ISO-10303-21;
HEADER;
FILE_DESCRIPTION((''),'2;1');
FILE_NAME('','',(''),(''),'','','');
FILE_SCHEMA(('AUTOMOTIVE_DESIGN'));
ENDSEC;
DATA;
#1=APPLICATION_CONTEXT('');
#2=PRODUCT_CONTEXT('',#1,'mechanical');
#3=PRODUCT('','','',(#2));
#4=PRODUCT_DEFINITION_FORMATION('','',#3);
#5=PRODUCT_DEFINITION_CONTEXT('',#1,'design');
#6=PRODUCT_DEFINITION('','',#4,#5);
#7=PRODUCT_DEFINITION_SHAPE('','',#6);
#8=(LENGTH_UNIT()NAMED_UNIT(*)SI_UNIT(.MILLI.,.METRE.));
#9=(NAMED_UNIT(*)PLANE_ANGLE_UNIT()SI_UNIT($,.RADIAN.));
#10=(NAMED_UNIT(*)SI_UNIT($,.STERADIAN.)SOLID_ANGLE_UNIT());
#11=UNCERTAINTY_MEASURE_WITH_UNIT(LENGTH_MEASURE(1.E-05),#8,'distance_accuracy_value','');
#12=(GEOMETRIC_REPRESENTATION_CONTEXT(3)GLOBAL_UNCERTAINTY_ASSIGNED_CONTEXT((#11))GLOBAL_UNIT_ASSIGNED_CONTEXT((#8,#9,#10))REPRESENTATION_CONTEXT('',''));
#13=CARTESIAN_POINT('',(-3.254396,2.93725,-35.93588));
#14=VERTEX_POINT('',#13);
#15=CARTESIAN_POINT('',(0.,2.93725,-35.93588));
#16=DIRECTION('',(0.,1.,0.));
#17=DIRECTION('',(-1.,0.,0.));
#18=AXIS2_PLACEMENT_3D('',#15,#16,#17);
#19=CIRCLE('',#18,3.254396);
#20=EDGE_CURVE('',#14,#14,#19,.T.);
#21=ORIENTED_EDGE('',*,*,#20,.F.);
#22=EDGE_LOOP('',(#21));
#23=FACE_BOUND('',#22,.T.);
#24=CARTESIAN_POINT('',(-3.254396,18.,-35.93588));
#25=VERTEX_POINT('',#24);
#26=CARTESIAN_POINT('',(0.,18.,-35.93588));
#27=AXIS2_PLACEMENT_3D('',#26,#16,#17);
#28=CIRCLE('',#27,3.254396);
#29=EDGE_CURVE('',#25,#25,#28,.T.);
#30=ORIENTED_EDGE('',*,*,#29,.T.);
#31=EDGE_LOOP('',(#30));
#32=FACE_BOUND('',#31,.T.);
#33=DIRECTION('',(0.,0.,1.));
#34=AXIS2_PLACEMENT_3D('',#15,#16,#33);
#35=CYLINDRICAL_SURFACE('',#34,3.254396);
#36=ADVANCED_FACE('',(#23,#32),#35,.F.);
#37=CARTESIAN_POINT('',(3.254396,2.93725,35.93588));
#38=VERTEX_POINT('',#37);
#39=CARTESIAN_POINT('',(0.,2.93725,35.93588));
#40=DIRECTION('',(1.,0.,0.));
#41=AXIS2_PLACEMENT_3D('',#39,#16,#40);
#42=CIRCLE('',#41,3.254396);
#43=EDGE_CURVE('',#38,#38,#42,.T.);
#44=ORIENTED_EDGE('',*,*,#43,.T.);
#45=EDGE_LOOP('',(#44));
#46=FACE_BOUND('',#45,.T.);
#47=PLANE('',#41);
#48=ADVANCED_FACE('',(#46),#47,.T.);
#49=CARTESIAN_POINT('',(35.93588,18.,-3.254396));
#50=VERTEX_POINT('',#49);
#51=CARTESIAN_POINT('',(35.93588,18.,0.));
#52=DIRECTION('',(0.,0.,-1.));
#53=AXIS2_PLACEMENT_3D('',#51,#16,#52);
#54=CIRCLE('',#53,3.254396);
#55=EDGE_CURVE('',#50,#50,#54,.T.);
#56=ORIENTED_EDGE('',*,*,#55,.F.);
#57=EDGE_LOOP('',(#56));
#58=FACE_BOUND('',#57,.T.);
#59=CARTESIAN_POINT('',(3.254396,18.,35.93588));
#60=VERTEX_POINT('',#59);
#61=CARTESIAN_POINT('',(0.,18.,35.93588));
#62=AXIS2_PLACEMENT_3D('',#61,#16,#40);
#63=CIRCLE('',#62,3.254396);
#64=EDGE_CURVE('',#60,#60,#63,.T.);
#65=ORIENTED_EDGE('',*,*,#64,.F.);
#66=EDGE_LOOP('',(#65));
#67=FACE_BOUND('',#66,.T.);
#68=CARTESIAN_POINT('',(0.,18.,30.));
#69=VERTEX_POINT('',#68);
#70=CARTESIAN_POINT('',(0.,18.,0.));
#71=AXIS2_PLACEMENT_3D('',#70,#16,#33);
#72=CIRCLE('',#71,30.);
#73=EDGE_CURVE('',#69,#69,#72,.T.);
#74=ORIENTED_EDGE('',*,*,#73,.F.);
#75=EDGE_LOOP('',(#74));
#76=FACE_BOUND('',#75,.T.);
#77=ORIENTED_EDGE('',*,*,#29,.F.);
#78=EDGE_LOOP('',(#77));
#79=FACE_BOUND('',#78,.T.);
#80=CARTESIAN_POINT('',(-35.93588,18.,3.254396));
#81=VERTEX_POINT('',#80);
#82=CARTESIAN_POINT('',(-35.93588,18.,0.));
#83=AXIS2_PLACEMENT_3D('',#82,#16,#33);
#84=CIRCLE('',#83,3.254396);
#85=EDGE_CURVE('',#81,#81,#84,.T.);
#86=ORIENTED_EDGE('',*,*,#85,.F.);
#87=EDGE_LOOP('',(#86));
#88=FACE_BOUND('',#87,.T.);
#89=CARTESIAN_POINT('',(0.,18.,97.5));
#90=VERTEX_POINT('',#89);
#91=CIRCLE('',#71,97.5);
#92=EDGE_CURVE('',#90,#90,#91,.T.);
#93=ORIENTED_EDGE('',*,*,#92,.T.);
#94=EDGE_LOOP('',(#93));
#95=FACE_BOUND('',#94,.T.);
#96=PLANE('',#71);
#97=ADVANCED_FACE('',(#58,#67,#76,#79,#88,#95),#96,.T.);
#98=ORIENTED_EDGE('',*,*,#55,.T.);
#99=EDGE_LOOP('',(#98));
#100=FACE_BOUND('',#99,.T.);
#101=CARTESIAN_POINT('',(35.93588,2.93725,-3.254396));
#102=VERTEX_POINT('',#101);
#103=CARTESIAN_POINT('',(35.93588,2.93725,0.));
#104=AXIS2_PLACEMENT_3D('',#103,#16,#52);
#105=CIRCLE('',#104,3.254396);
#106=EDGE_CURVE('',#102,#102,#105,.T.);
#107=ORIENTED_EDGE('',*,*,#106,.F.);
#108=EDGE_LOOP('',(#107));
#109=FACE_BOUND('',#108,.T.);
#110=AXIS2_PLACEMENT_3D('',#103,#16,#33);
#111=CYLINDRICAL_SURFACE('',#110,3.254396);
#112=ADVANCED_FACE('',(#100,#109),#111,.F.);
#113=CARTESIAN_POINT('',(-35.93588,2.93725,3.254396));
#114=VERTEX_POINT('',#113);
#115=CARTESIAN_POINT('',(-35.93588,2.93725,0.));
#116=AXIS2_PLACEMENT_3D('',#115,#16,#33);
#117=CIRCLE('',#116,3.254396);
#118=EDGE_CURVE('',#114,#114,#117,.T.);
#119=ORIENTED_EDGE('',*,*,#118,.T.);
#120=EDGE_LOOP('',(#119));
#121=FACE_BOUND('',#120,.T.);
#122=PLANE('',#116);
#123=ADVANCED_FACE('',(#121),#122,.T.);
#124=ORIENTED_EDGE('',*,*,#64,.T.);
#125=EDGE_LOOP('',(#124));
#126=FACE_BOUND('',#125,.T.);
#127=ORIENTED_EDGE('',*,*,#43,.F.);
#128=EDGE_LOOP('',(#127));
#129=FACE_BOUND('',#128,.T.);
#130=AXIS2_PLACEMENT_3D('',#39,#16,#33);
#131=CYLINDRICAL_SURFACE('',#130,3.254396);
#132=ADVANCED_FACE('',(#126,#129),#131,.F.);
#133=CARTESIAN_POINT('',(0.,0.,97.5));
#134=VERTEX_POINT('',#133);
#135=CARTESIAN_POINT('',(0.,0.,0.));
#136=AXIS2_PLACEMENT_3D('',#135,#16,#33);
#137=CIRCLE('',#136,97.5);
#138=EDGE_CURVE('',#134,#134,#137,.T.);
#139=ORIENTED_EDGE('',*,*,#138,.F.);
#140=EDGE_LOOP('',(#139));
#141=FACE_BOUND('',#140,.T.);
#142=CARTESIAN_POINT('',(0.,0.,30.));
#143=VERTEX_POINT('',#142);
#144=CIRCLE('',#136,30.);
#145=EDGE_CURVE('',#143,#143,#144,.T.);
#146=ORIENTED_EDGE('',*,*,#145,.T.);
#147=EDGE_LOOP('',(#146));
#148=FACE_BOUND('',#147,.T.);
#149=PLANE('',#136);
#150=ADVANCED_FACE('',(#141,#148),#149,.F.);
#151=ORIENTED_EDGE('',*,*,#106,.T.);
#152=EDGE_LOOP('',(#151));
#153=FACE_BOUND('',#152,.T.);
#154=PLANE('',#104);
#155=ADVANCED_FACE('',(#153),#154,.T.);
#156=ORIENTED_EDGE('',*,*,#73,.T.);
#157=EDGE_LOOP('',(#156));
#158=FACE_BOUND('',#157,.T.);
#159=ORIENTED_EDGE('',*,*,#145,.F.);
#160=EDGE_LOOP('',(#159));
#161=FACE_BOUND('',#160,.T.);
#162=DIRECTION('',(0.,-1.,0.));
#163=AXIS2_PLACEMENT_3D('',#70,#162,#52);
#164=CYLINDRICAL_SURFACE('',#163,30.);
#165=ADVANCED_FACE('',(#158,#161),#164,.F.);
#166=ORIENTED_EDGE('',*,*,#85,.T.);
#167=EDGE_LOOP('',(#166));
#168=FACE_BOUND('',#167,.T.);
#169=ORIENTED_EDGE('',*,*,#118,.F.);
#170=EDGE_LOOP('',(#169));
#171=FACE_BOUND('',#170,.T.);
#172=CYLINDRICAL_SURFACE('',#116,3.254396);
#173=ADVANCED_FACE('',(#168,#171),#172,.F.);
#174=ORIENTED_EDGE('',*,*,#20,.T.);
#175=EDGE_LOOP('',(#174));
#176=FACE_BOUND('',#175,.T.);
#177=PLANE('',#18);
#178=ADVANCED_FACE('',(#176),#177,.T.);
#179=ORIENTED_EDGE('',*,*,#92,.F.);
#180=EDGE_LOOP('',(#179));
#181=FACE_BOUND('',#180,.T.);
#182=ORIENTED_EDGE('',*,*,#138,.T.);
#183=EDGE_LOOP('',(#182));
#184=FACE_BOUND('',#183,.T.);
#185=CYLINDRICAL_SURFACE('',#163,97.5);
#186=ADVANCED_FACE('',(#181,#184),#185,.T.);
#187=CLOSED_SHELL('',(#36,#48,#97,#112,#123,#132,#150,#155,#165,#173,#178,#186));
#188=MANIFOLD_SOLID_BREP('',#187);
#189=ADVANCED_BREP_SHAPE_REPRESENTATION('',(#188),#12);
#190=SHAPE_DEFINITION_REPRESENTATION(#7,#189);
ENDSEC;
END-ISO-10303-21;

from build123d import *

# Parameters (mm, degrees)
SKETCH1_R           = 97.5
BOSS_EXTRUDE1_DEPTH = 18
SKETCH2_R           = 30
CUT_EXTRUDE1_DEPTH  = 140.055744218
SKETCH3_R           = 3.254395641
CUT_EXTRUDE2_DEPTH  = 15.062750466
CIRPATTERN1_COUNT   = 4


with BuildPart() as part:
    # Sketch1 → Boss-Extrude1 (new body)
    with BuildSketch(Plane(origin=(0, 0, 0), x_dir=(1, 0, 0), z_dir=(0, 1, 0))):
        Circle(SKETCH1_R)
    extrude(amount=BOSS_EXTRUDE1_DEPTH)

    # Sketch2 → Cut-Extrude1 (cut, through all)
    with BuildSketch(Plane(origin=(0, 0, 0), x_dir=(1, 0, 0), z_dir=(0, 1, 0))):
        Circle(SKETCH2_R)
    extrude(amount=CUT_EXTRUDE1_DEPTH, mode=Mode.SUBTRACT)

    # Sketch3 → Cut-Extrude2 (cut)
    with BuildSketch(Plane(origin=(0, 18, 0), x_dir=(1, 0, 0), z_dir=(0, 1, 0))):
        with Locations((-35.935879581, 0)):
            Circle(SKETCH3_R)
    cut_extrude2 = extrude(amount=-CUT_EXTRUDE2_DEPTH, mode=Mode.SUBTRACT)

    # CirPattern1: Cut-Extrude2 ×4 about axis
    cirpattern1_axis = Axis((0, 0, 0), (0, 1, 0))
    for i in range(1, CIRPATTERN1_COUNT):
        add(cut_extrude2.rotate(cirpattern1_axis, i * 360 / CIRPATTERN1_COUNT), mode=Mode.SUBTRACT)


solid = part.part
